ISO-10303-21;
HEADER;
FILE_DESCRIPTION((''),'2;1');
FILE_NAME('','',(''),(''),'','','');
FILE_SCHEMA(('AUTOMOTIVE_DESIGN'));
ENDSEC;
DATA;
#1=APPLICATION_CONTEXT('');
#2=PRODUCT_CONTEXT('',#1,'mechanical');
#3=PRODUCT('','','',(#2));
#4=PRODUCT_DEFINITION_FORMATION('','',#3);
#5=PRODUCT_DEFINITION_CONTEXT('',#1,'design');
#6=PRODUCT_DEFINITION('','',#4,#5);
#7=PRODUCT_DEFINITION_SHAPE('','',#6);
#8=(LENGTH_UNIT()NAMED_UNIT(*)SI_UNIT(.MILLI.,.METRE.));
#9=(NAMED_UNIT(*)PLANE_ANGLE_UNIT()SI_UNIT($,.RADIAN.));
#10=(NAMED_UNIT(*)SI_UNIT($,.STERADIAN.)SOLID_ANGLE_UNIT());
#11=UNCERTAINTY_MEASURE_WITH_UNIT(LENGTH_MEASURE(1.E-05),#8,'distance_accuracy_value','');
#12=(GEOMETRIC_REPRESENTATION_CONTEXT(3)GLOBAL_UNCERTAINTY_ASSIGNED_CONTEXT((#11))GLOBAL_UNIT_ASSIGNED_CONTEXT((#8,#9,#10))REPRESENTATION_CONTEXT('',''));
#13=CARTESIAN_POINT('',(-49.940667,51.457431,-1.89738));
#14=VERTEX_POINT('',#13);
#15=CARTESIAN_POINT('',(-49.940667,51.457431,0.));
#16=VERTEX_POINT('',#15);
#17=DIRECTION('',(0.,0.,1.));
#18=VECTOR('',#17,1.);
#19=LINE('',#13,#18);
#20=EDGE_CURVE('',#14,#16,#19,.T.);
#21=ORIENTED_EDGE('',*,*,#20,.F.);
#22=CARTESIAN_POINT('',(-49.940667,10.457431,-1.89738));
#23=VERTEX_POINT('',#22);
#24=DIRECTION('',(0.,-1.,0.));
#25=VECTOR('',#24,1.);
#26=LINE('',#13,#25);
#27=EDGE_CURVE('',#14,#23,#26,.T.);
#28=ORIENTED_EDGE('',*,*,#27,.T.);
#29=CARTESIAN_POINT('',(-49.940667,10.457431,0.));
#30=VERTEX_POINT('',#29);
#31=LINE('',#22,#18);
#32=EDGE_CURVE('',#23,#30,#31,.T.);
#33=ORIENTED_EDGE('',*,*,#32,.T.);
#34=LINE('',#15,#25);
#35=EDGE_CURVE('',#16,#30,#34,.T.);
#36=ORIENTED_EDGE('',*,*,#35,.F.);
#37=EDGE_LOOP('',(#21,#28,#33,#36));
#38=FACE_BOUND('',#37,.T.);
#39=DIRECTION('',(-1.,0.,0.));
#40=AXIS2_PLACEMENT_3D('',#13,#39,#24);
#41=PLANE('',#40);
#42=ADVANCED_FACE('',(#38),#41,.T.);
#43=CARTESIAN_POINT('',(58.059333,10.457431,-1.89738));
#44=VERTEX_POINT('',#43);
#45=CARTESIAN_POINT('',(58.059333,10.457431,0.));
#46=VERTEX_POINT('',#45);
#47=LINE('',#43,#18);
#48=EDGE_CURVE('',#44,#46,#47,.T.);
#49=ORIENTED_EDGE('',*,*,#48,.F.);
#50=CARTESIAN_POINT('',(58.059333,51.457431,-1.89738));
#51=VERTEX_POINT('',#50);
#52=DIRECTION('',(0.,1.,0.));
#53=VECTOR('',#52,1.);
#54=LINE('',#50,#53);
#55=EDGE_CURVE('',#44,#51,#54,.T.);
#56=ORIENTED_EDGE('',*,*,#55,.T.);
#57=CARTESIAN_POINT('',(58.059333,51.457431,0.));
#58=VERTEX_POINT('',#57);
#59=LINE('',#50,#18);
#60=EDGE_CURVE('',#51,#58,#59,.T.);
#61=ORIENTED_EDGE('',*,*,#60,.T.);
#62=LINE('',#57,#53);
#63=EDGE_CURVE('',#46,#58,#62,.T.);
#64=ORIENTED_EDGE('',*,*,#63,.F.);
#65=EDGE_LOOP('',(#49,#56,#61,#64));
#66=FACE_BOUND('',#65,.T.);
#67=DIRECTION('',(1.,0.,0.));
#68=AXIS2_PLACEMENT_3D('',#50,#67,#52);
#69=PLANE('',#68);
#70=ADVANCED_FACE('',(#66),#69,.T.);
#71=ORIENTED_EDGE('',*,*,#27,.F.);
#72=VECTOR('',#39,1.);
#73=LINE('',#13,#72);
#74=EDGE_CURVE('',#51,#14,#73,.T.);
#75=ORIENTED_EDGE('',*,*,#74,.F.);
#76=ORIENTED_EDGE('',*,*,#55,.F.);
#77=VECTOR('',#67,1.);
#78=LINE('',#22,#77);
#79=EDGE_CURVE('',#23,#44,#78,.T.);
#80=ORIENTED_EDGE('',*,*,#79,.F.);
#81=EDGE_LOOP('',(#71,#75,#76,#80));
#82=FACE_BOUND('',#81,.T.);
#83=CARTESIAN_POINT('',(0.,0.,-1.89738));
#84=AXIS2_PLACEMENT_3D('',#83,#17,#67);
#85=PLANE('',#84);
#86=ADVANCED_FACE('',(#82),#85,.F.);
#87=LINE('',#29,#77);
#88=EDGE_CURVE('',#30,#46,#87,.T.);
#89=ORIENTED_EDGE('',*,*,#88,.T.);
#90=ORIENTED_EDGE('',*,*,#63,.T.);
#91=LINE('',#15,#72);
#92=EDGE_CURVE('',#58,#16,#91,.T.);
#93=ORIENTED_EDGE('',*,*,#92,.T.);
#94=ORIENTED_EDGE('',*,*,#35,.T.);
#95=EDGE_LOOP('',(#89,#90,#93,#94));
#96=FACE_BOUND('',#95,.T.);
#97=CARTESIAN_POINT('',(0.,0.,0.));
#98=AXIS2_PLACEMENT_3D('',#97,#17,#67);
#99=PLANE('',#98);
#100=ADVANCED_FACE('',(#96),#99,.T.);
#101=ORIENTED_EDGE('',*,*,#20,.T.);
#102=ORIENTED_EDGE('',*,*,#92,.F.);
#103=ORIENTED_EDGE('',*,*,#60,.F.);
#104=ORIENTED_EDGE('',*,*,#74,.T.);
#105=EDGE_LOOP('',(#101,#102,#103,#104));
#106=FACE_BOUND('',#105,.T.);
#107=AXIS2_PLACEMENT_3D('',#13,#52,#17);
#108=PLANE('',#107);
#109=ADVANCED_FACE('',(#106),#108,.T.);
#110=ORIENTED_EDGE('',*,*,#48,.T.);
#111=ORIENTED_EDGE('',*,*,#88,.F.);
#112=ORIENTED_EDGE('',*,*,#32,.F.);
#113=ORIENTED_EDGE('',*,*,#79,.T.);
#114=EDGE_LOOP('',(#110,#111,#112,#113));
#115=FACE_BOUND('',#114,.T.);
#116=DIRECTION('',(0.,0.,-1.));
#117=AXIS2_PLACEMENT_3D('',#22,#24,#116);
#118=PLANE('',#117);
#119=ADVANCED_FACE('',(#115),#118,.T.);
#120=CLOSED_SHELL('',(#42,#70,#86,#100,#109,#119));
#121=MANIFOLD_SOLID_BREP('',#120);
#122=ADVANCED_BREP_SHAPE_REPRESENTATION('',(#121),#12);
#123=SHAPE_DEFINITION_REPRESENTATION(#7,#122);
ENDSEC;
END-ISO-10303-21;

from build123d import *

# Parameters (mm, degrees)
SKETCH1_W          = 108
SKETCH1_H          = 41
BASE_FLANGE1_DEPTH = 1.89738


# Sheet-metal steps are written as plain solids
with BuildPart() as part:
    # Sketch1 → Base-Flange1 (new body)
    with BuildSketch(Plane.XY):
        with Locations((4.059333085, 30.957431136)):
            Rectangle(SKETCH1_W, SKETCH1_H)
    extrude(amount=-BASE_FLANGE1_DEPTH)


solid = part.part
